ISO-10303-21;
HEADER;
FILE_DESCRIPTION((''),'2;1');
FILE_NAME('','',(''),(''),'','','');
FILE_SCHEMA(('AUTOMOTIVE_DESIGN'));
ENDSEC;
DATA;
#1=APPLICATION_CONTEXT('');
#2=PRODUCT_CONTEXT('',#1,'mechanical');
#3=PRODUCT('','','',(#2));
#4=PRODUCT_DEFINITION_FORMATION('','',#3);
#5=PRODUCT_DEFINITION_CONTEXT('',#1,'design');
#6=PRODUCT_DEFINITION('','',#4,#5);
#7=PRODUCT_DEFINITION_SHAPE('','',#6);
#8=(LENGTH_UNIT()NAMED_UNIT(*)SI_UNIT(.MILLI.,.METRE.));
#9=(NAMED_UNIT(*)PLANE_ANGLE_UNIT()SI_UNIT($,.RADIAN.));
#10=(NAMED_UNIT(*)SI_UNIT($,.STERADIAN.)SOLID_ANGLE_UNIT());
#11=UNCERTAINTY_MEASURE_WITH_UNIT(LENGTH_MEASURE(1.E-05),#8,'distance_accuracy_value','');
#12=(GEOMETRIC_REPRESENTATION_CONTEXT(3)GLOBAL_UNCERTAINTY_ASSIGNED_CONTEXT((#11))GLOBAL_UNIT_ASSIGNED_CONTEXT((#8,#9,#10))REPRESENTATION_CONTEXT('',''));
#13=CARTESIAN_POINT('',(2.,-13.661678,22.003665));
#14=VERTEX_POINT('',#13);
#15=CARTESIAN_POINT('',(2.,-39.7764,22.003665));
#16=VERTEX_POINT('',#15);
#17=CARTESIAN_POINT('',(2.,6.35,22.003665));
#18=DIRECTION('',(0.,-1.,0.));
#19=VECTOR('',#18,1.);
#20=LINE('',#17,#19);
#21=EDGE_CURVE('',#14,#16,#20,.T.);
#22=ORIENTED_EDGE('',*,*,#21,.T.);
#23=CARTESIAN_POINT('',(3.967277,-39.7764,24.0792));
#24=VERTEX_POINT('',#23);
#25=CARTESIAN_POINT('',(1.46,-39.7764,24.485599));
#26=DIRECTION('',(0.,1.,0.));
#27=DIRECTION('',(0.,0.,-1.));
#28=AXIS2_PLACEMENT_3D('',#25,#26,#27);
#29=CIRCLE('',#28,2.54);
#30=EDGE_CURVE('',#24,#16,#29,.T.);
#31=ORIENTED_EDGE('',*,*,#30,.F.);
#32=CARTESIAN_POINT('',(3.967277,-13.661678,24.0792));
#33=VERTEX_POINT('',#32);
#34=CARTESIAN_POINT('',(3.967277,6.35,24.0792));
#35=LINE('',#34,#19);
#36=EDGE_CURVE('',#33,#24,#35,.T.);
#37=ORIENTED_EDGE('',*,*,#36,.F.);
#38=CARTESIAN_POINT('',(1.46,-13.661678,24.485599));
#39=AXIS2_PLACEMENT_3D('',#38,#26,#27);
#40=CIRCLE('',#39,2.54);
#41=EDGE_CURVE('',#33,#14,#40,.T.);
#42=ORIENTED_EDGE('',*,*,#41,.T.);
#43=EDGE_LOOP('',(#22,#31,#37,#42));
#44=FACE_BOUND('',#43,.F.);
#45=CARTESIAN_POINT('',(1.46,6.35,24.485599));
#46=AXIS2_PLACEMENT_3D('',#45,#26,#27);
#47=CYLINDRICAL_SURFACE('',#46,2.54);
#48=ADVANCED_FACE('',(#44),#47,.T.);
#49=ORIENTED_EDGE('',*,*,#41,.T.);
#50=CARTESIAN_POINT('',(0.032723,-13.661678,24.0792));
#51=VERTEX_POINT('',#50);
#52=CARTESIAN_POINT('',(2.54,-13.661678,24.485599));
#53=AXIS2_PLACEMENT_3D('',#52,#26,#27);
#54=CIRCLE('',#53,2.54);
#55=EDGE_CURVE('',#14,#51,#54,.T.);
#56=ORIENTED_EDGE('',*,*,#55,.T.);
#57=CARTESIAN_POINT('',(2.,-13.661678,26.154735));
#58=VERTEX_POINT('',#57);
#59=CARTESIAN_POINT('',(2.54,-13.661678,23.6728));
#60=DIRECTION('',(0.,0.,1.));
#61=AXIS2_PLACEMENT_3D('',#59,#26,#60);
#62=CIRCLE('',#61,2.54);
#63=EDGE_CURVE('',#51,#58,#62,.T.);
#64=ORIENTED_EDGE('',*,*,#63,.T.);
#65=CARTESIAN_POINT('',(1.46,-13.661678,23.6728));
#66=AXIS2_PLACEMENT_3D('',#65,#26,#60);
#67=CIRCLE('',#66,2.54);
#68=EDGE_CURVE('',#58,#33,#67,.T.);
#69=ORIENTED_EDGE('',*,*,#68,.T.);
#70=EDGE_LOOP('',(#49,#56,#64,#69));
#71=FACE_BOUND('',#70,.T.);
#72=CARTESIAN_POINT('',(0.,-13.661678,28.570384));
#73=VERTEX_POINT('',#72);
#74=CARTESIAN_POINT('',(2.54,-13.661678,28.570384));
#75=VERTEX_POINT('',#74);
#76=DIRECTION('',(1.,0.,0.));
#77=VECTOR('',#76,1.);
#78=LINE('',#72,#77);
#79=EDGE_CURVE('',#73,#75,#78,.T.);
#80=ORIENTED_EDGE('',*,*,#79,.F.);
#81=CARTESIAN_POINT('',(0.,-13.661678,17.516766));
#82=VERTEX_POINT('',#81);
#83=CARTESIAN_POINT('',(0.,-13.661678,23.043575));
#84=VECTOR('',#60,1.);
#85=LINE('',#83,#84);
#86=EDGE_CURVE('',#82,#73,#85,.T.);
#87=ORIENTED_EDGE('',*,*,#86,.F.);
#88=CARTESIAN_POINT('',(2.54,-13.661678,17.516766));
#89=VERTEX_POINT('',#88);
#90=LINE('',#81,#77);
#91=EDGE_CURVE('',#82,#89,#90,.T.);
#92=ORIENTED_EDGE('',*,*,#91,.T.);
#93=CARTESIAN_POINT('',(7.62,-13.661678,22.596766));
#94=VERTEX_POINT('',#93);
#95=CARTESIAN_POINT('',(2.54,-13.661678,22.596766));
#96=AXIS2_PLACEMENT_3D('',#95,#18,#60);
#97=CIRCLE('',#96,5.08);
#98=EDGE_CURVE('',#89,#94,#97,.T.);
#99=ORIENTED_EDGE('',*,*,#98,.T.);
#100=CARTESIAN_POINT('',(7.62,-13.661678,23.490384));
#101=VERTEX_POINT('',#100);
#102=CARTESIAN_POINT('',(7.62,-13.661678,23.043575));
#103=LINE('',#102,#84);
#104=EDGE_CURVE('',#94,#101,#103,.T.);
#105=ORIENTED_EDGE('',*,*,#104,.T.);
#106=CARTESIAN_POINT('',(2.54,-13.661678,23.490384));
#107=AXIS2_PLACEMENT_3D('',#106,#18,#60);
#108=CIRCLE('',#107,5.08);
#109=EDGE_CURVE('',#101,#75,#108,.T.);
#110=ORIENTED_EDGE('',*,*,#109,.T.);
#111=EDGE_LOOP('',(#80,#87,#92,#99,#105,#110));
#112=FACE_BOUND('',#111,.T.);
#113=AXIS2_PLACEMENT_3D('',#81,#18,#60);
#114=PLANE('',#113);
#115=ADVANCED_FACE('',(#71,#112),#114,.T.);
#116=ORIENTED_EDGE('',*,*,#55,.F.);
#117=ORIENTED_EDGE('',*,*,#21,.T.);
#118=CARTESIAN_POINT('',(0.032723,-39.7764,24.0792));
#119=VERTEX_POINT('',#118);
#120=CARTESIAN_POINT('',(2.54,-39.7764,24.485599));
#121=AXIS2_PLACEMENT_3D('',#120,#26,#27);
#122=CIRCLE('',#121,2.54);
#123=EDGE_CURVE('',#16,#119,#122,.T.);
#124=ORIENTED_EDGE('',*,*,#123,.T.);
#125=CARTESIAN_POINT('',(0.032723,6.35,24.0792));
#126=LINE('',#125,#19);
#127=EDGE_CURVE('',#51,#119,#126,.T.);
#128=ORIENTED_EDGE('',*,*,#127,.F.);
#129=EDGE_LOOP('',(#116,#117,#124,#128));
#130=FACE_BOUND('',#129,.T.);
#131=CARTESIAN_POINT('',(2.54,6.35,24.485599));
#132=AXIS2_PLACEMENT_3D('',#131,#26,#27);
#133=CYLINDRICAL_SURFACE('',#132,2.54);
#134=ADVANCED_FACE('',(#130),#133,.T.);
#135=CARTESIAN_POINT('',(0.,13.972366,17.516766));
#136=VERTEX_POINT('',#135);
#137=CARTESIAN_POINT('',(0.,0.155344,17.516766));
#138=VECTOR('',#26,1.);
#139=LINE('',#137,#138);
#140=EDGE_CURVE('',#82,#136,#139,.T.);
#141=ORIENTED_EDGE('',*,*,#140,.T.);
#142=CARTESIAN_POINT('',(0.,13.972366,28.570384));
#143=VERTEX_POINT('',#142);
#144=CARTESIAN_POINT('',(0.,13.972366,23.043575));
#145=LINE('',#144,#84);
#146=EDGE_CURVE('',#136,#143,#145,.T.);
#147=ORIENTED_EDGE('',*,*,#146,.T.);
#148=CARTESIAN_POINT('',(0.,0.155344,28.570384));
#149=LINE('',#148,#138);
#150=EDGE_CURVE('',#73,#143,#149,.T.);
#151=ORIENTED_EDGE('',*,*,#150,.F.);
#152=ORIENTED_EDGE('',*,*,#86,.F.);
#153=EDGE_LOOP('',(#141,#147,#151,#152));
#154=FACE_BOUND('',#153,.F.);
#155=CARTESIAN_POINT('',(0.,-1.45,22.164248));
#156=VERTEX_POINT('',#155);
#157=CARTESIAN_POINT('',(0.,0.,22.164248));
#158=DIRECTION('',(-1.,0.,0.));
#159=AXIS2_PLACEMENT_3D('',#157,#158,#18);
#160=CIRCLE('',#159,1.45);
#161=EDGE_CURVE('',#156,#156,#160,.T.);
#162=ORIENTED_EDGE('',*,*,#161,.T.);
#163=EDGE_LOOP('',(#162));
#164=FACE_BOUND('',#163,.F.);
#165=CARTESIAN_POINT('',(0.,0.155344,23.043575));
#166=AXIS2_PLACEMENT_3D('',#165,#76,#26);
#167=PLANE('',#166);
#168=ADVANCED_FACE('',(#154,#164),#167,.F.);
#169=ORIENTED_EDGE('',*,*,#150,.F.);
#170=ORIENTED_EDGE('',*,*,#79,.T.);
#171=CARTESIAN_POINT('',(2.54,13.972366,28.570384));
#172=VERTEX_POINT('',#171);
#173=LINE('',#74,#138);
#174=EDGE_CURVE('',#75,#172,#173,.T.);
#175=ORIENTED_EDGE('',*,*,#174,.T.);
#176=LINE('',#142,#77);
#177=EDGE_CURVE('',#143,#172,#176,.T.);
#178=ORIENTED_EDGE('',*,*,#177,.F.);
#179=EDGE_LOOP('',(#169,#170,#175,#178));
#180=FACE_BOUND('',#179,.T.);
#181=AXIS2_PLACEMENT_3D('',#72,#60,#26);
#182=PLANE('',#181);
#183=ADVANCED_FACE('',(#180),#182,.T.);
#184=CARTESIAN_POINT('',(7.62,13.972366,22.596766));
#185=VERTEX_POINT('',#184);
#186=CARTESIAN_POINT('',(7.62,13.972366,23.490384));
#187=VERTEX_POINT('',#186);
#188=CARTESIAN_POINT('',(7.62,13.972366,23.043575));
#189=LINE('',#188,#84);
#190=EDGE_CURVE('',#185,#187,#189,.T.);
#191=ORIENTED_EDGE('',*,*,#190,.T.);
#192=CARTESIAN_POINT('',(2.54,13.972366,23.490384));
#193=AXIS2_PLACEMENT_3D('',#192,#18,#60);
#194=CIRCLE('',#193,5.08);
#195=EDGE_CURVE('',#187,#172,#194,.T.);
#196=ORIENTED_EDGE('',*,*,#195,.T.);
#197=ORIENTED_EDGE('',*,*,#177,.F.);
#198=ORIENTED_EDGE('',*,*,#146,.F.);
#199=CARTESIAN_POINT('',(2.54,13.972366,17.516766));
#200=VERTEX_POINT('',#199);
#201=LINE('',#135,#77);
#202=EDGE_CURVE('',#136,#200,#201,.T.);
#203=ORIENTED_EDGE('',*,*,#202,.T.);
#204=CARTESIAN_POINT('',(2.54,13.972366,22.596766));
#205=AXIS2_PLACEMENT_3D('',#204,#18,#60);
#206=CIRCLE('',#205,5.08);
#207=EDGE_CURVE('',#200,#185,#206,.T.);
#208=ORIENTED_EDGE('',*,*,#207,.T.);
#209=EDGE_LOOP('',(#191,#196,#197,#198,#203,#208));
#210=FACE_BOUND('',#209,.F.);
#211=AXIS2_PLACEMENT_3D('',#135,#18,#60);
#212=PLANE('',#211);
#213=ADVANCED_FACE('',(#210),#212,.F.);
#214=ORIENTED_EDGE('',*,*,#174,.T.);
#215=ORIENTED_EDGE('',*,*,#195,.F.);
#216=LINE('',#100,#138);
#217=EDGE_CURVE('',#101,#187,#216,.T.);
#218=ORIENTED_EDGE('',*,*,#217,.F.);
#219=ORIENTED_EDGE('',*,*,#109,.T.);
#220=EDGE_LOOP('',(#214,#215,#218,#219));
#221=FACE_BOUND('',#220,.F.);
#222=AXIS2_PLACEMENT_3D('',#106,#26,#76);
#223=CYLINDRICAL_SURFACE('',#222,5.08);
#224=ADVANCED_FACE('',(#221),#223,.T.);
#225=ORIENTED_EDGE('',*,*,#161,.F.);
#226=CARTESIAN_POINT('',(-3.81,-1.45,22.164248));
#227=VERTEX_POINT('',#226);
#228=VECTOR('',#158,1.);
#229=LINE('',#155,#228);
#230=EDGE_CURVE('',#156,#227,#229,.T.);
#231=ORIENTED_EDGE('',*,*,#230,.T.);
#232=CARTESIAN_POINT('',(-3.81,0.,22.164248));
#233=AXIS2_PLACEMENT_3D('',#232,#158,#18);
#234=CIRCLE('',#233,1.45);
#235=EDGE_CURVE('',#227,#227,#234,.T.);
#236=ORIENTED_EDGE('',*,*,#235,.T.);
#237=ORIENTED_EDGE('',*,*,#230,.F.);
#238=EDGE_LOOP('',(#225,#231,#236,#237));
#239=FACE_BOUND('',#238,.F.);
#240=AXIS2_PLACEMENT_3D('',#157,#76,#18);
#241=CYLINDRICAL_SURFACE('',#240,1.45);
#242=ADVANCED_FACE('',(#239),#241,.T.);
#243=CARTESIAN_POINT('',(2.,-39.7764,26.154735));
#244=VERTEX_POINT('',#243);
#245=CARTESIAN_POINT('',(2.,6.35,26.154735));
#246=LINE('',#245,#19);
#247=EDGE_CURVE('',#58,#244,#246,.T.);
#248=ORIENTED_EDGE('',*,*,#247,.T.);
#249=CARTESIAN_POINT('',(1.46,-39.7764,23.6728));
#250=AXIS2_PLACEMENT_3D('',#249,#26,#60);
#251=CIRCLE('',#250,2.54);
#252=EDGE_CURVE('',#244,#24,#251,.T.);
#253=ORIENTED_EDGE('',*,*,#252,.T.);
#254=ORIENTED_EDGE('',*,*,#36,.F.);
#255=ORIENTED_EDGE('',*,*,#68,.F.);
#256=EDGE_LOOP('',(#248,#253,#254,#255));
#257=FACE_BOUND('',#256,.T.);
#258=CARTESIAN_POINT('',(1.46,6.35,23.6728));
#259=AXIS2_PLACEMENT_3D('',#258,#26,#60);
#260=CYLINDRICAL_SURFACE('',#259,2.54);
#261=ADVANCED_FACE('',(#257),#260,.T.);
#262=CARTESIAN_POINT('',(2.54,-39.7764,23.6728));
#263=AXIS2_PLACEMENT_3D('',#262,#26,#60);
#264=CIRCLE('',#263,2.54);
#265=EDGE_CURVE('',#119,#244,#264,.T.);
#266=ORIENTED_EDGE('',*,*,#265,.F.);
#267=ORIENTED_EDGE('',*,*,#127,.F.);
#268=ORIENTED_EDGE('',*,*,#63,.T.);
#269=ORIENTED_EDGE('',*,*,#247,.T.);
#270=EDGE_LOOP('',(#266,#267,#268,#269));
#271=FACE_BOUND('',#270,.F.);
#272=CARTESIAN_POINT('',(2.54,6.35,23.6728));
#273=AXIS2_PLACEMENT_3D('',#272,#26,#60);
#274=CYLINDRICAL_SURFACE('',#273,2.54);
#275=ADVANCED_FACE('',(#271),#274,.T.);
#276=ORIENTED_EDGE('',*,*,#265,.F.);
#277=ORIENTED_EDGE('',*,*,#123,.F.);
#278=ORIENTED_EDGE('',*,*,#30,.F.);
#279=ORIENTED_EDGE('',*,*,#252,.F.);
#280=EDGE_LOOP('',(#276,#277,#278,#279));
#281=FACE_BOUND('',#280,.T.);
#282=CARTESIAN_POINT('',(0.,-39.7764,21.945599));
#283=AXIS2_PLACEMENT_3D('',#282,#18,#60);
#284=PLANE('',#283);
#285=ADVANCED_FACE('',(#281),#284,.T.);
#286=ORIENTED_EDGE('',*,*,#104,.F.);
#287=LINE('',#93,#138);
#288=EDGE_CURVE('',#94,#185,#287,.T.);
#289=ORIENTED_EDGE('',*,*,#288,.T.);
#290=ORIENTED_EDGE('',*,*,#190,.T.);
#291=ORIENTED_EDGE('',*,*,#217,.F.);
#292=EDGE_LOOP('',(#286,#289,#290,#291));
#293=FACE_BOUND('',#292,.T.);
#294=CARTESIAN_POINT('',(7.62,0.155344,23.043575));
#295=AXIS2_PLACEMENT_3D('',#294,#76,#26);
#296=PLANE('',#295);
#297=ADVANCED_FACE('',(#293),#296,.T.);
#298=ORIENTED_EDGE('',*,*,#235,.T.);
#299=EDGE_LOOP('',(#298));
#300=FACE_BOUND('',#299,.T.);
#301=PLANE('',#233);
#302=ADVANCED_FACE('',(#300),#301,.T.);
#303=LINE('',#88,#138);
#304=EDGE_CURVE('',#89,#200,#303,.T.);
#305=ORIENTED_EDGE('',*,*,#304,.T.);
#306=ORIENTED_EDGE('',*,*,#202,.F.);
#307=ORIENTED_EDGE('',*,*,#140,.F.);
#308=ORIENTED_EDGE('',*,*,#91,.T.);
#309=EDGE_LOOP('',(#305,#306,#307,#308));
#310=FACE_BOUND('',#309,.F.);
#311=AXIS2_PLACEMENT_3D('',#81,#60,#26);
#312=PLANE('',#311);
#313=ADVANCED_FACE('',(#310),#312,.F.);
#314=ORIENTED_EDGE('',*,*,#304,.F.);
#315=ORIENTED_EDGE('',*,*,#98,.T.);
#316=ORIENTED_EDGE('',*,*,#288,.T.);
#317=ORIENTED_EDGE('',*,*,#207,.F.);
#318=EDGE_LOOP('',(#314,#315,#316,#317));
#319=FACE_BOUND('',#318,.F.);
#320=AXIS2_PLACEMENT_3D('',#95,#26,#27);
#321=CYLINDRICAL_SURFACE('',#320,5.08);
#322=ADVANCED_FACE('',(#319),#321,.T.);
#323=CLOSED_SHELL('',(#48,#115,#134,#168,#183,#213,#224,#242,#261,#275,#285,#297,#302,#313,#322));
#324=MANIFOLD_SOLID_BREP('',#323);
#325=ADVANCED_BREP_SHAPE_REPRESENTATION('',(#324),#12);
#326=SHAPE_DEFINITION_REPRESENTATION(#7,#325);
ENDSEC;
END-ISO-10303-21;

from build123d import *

# Parameters (mm, degrees)
F0_W        = 39.7763997316
F0_H        = 4.2672008276
F1_DEPTH    = 4
F2_T1_DEPTH = 52.4763997316
F3_W        = 27.6340441778
F3_H        = 11.0536180437
F4_DEPTH    = 7.62
F5_R        = 5.08
F6_R        = 1.45
F7_DEPTH    = 3.81


# Not quite as in the source:
# - a fillet or chamfer that OpenCascade refuses, or shapes differently, is made with other operations: its cross-section is extruded or revolved along the edge and cut away or added


with BuildPart() as f1:
    # F0 (on Right) → F1 (new body)
    with BuildSketch(Plane.YZ):
        with Locations((-19.8881998658, 24.0791998804)):
            Rectangle(F0_W, F0_H)
    extrude(amount=F1_DEPTH)

    # F2: fillet of radius 2.54 on 4 edges, made by hand

    # F2_s2 → F2_t1 (cut)
    with BuildSketch(Plane.XZ.offset(-6.35)):
        with BuildLine():
            ThreePointArc((1.46, 26.2128002942), (3.2560512242, 25.4688515184), (4, 23.6728002942))
            Line((4, 23.6728002942), (4, 26.2128002942))
            Line((4, 26.2128002942), (1.46, 26.2128002942))
        make_face()
        with BuildLine():
            ThreePointArc((2.54, 26.2128002942), (0.7439487758, 25.4688515184), (0, 23.6728002942))
            Line((0, 23.6728002942), (0, 26.2128002942))
            Line((0, 26.2128002942), (2.54, 26.2128002942))
        make_face()
        with BuildLine():
            ThreePointArc((1.46, 21.9455994666), (3.2560512242, 22.6895482423), (4, 24.4855994666))
            Line((4, 24.4855994666), (4, 21.9455994666))
            Line((4, 21.9455994666), (1.46, 21.9455994666))
        make_face()
        with BuildLine():
            ThreePointArc((2.54, 21.9455994666), (0.7439487758, 22.6895482423), (0, 24.4855994666))
            Line((0, 24.4855994666), (0, 21.9455994666))
            Line((0, 21.9455994666), (2.54, 21.9455994666))
        make_face()
    extrude(amount=F2_T1_DEPTH, mode=Mode.SUBTRACT)

    # F3 (on Right) → F4 (join)
    with BuildSketch(Plane.YZ):
        with Locations((0.1553441398, 23.0435747653)):
            Rectangle(F3_W, F3_H)
    extrude(amount=F4_DEPTH)

    # F5
    f5_edges = [f1.edges().sort_by_distance(p)[0] for p in [
        (7.62, 0.155344, 28.570384),
        (7.62, 0.155344, 17.516766),
    ]]
    fillet(f5_edges, radius=F5_R)

    # F6 (on face) → F7 (join)
    with BuildSketch(Plane(origin=(0, 0, 0), x_dir=(0, -1, 0), z_dir=(-1, 0, 0))):
        with Locations((0, 22.1642478059)):
            Circle(F6_R)
    extrude(amount=F7_DEPTH)


solid = f1.part
